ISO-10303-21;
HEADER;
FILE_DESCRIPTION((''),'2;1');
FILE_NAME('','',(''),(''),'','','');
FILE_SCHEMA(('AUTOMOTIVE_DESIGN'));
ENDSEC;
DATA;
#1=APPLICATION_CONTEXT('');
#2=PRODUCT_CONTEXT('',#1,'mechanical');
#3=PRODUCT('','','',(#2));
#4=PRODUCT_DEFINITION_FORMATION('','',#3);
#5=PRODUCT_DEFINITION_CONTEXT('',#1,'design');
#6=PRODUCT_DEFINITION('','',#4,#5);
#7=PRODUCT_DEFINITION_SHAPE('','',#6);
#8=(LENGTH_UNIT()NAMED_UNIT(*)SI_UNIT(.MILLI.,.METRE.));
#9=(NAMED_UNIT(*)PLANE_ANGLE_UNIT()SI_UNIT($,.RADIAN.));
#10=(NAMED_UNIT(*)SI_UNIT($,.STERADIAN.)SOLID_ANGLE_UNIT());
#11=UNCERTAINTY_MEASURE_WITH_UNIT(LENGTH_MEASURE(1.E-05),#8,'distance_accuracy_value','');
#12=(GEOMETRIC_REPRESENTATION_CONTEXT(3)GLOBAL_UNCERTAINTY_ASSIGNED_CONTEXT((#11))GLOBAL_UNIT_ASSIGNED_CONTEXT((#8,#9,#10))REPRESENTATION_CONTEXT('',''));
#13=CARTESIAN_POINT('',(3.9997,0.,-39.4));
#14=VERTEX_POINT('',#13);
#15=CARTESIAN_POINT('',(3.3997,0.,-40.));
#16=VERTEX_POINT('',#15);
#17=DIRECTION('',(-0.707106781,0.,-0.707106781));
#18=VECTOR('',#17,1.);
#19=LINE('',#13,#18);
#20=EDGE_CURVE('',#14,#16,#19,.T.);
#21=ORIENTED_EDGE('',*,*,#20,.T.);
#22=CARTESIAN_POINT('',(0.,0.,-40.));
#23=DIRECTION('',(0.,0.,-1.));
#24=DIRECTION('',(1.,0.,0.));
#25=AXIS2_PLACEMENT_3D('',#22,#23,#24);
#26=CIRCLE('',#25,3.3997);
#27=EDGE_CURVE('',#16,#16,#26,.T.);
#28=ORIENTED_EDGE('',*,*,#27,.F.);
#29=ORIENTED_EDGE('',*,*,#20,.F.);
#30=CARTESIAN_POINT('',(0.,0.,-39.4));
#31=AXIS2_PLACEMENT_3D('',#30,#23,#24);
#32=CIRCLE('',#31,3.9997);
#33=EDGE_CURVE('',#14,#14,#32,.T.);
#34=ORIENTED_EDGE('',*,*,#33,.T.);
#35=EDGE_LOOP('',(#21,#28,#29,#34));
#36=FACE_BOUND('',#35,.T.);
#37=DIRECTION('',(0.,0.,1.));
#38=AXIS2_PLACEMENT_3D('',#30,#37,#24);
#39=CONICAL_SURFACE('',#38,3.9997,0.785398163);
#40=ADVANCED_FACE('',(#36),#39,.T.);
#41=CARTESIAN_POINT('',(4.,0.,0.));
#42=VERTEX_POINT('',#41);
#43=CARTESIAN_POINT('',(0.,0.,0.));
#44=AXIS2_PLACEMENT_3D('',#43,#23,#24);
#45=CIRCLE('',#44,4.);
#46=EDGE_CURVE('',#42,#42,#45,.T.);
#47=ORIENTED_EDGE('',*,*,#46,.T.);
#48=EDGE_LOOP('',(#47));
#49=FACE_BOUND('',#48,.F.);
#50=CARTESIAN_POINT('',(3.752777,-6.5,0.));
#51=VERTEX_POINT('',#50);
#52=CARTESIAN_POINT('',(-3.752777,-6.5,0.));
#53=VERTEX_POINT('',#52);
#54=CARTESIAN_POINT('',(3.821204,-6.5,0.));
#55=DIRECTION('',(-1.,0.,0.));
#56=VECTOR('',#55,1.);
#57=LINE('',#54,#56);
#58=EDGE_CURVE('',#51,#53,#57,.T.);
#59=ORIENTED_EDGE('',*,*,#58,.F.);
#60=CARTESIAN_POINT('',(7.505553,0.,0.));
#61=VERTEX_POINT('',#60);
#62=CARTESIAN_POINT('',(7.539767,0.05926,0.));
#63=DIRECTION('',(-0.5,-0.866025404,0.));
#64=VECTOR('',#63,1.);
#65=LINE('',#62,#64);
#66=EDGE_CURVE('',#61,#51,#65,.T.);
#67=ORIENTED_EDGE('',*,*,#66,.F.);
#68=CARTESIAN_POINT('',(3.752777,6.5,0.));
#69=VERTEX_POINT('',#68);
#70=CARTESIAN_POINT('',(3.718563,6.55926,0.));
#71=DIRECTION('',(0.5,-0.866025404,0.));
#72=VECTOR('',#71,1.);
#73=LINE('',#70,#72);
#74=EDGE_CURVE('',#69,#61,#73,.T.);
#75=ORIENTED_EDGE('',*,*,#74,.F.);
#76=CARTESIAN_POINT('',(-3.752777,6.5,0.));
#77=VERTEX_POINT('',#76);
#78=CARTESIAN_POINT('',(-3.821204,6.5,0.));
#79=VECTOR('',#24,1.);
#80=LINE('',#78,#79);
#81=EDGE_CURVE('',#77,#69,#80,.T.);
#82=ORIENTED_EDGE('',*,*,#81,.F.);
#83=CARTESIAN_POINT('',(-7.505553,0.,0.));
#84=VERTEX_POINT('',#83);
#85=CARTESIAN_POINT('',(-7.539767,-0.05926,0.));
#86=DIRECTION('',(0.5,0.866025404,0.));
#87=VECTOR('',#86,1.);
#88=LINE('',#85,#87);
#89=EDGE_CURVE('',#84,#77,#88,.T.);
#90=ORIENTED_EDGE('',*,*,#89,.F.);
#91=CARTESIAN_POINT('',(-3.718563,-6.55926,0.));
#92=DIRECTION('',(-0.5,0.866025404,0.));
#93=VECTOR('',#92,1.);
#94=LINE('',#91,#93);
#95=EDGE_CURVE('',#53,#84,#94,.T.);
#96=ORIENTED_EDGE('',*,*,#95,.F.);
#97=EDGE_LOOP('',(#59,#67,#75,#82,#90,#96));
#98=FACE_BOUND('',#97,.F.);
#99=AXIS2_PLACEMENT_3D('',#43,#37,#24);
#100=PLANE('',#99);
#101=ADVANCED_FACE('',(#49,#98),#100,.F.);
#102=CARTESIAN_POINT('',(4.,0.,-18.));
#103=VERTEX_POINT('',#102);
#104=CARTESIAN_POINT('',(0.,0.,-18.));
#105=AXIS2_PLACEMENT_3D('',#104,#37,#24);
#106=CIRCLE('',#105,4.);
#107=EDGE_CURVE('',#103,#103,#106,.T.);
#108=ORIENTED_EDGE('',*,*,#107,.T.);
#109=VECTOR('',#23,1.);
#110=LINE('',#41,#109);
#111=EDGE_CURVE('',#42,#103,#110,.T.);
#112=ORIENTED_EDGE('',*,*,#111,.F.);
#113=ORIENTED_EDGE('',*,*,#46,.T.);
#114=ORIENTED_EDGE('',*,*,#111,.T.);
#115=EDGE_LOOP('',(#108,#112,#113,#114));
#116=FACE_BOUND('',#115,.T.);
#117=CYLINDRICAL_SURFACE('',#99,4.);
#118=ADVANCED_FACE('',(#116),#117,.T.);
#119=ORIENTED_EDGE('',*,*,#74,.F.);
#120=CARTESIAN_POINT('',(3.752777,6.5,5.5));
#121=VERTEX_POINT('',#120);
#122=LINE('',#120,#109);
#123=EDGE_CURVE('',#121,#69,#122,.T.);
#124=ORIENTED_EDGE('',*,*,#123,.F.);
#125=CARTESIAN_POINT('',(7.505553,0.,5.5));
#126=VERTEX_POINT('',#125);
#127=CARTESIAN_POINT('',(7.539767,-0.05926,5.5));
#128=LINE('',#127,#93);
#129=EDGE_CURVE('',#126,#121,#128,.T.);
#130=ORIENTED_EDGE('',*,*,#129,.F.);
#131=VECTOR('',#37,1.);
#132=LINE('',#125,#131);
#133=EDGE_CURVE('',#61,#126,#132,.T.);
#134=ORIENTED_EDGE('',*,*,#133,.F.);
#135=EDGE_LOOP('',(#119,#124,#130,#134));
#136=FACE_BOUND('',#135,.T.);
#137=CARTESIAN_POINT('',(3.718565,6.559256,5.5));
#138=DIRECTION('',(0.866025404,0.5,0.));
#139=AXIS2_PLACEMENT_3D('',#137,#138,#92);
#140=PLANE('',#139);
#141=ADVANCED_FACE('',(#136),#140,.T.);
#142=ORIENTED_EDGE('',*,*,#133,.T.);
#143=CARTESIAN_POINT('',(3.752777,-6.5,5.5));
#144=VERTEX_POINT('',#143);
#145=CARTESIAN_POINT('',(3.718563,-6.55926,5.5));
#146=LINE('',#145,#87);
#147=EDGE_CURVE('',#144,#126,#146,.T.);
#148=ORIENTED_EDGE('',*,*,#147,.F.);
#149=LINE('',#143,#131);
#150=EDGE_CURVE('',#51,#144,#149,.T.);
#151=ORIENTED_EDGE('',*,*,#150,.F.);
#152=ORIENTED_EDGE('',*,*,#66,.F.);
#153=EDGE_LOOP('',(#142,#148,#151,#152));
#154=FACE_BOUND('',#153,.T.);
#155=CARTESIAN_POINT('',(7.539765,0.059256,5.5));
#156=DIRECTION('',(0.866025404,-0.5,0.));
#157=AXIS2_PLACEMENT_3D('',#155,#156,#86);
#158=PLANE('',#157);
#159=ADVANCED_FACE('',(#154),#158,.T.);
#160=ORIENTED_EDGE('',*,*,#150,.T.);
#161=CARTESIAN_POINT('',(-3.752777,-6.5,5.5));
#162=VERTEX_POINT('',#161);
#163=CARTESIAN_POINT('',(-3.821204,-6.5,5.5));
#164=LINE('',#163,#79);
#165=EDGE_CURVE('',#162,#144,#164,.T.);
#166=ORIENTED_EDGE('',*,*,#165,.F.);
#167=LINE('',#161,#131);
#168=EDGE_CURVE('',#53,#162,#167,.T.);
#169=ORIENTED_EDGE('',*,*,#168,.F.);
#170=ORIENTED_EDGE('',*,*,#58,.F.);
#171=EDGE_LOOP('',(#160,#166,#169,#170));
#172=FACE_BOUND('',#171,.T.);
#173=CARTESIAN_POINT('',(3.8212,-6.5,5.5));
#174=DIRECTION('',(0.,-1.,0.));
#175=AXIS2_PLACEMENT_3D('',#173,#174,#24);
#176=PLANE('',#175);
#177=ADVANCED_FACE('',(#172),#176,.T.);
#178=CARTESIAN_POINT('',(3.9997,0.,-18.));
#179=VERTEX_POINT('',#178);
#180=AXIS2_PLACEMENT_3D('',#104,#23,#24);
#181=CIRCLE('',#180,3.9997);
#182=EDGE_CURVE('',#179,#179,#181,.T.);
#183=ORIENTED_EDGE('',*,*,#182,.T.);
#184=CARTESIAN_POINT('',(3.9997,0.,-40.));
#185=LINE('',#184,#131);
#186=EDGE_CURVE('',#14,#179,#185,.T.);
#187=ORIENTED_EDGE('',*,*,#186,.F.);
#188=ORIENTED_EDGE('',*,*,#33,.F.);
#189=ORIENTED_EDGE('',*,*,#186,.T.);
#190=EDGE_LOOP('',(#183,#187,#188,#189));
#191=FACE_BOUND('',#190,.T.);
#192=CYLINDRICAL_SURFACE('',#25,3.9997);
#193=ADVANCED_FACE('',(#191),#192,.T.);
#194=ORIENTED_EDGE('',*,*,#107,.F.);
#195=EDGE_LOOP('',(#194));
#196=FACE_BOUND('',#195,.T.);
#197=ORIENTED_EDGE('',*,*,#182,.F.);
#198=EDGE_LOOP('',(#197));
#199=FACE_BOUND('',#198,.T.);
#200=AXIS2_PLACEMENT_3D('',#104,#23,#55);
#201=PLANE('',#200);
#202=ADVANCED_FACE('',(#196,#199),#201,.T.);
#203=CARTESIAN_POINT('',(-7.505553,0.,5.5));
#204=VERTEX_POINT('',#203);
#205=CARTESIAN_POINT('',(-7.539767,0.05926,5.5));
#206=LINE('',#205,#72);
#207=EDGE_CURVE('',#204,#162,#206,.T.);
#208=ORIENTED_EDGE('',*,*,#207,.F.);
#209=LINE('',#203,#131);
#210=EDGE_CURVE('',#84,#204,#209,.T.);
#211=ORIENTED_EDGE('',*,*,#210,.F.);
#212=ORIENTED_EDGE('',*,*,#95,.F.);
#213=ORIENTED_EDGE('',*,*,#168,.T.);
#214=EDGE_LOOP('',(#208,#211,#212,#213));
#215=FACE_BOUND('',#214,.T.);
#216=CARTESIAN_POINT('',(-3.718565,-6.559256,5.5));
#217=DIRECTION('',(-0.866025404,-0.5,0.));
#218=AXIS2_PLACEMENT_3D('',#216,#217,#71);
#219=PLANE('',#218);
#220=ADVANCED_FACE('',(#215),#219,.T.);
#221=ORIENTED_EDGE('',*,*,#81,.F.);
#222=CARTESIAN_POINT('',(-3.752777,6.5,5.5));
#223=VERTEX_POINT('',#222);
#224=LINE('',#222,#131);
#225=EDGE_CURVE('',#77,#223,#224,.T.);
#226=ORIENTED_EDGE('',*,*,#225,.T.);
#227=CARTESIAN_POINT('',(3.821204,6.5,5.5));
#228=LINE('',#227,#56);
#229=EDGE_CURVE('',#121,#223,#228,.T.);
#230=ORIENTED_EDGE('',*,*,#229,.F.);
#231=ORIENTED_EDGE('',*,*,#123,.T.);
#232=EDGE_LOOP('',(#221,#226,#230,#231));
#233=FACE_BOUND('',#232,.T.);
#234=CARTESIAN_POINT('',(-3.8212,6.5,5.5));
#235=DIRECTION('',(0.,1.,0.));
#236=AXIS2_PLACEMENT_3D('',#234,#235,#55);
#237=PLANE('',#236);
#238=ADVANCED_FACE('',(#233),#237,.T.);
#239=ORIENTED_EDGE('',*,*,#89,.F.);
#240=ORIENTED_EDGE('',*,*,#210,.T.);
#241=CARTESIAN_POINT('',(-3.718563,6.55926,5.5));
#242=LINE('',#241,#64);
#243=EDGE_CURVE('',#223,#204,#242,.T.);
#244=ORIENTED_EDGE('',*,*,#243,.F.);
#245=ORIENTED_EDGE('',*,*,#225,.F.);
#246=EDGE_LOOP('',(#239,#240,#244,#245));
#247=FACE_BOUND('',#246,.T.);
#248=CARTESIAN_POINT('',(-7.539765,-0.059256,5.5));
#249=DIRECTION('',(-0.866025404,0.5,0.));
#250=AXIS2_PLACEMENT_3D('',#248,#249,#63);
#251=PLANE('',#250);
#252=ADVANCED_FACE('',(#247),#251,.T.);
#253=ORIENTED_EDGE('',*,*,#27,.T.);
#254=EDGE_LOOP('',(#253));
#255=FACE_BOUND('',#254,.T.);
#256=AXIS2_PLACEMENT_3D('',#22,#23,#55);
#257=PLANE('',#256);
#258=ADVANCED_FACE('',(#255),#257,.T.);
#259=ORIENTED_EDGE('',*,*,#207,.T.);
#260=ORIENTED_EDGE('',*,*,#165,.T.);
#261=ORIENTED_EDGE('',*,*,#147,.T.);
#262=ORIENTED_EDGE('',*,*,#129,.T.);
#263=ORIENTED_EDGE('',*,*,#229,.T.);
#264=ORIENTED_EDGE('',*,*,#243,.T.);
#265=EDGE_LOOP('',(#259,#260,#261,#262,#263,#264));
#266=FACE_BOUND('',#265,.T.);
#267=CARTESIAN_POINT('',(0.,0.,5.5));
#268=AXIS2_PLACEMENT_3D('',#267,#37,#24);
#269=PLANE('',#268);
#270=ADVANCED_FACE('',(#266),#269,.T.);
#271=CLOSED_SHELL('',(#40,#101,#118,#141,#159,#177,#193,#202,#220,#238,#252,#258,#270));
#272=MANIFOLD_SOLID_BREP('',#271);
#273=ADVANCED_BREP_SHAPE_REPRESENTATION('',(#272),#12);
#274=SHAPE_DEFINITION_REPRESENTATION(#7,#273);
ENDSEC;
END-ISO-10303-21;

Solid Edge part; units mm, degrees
sketch "Sketch1" plane through (0, 0, 0) normal (0, 0, 1) x (1, 0, 0)
  circle A0 centre (0, 0) radius 7.54
  dimension "D1" = 15.08
extrude "Protrusion1" add sketch "Sketch1" along normal blind 5.5
sketch "Sketch2" plane through (0, 0, 0) normal (0, 0, -1) x (1, 0, 0)
  circle A0 centre (0, 0) radius 4
extrude "Protrusion2" add sketch "Sketch2" along normal blind 40
sketch "Sketch3" plane through (0, 0, -40) normal (0, 0, -1) x (1, 0, 0)
  circle A0 centre (0, 0) radius 3.9997
extrude "Cutout1" cut sketch "Sketch3" against normal blind 22 flip side to cut
chamfer "Chamfer_1" distance 0.6 angle 45 1 edges at (-3.9997, 0, -40)
sketch "Sketch4" plane through (0, 0, 5.5) normal (0, 0, 1) x (1, 0, 0)
  line L0 (-3.8212, 6.5) -> (3.8212, 6.5)
  dimension "D1" = 13
extrude "Cutout2" cut sketch "Sketch4" against normal up to next material side at (0, 6.55, 5.5)
pattern_circular "Pattern1" count 6 over 360 about axis through (0, 0, 5.5) along (0, 0, 1) of "Cutout2"
properties part number "24104926"
